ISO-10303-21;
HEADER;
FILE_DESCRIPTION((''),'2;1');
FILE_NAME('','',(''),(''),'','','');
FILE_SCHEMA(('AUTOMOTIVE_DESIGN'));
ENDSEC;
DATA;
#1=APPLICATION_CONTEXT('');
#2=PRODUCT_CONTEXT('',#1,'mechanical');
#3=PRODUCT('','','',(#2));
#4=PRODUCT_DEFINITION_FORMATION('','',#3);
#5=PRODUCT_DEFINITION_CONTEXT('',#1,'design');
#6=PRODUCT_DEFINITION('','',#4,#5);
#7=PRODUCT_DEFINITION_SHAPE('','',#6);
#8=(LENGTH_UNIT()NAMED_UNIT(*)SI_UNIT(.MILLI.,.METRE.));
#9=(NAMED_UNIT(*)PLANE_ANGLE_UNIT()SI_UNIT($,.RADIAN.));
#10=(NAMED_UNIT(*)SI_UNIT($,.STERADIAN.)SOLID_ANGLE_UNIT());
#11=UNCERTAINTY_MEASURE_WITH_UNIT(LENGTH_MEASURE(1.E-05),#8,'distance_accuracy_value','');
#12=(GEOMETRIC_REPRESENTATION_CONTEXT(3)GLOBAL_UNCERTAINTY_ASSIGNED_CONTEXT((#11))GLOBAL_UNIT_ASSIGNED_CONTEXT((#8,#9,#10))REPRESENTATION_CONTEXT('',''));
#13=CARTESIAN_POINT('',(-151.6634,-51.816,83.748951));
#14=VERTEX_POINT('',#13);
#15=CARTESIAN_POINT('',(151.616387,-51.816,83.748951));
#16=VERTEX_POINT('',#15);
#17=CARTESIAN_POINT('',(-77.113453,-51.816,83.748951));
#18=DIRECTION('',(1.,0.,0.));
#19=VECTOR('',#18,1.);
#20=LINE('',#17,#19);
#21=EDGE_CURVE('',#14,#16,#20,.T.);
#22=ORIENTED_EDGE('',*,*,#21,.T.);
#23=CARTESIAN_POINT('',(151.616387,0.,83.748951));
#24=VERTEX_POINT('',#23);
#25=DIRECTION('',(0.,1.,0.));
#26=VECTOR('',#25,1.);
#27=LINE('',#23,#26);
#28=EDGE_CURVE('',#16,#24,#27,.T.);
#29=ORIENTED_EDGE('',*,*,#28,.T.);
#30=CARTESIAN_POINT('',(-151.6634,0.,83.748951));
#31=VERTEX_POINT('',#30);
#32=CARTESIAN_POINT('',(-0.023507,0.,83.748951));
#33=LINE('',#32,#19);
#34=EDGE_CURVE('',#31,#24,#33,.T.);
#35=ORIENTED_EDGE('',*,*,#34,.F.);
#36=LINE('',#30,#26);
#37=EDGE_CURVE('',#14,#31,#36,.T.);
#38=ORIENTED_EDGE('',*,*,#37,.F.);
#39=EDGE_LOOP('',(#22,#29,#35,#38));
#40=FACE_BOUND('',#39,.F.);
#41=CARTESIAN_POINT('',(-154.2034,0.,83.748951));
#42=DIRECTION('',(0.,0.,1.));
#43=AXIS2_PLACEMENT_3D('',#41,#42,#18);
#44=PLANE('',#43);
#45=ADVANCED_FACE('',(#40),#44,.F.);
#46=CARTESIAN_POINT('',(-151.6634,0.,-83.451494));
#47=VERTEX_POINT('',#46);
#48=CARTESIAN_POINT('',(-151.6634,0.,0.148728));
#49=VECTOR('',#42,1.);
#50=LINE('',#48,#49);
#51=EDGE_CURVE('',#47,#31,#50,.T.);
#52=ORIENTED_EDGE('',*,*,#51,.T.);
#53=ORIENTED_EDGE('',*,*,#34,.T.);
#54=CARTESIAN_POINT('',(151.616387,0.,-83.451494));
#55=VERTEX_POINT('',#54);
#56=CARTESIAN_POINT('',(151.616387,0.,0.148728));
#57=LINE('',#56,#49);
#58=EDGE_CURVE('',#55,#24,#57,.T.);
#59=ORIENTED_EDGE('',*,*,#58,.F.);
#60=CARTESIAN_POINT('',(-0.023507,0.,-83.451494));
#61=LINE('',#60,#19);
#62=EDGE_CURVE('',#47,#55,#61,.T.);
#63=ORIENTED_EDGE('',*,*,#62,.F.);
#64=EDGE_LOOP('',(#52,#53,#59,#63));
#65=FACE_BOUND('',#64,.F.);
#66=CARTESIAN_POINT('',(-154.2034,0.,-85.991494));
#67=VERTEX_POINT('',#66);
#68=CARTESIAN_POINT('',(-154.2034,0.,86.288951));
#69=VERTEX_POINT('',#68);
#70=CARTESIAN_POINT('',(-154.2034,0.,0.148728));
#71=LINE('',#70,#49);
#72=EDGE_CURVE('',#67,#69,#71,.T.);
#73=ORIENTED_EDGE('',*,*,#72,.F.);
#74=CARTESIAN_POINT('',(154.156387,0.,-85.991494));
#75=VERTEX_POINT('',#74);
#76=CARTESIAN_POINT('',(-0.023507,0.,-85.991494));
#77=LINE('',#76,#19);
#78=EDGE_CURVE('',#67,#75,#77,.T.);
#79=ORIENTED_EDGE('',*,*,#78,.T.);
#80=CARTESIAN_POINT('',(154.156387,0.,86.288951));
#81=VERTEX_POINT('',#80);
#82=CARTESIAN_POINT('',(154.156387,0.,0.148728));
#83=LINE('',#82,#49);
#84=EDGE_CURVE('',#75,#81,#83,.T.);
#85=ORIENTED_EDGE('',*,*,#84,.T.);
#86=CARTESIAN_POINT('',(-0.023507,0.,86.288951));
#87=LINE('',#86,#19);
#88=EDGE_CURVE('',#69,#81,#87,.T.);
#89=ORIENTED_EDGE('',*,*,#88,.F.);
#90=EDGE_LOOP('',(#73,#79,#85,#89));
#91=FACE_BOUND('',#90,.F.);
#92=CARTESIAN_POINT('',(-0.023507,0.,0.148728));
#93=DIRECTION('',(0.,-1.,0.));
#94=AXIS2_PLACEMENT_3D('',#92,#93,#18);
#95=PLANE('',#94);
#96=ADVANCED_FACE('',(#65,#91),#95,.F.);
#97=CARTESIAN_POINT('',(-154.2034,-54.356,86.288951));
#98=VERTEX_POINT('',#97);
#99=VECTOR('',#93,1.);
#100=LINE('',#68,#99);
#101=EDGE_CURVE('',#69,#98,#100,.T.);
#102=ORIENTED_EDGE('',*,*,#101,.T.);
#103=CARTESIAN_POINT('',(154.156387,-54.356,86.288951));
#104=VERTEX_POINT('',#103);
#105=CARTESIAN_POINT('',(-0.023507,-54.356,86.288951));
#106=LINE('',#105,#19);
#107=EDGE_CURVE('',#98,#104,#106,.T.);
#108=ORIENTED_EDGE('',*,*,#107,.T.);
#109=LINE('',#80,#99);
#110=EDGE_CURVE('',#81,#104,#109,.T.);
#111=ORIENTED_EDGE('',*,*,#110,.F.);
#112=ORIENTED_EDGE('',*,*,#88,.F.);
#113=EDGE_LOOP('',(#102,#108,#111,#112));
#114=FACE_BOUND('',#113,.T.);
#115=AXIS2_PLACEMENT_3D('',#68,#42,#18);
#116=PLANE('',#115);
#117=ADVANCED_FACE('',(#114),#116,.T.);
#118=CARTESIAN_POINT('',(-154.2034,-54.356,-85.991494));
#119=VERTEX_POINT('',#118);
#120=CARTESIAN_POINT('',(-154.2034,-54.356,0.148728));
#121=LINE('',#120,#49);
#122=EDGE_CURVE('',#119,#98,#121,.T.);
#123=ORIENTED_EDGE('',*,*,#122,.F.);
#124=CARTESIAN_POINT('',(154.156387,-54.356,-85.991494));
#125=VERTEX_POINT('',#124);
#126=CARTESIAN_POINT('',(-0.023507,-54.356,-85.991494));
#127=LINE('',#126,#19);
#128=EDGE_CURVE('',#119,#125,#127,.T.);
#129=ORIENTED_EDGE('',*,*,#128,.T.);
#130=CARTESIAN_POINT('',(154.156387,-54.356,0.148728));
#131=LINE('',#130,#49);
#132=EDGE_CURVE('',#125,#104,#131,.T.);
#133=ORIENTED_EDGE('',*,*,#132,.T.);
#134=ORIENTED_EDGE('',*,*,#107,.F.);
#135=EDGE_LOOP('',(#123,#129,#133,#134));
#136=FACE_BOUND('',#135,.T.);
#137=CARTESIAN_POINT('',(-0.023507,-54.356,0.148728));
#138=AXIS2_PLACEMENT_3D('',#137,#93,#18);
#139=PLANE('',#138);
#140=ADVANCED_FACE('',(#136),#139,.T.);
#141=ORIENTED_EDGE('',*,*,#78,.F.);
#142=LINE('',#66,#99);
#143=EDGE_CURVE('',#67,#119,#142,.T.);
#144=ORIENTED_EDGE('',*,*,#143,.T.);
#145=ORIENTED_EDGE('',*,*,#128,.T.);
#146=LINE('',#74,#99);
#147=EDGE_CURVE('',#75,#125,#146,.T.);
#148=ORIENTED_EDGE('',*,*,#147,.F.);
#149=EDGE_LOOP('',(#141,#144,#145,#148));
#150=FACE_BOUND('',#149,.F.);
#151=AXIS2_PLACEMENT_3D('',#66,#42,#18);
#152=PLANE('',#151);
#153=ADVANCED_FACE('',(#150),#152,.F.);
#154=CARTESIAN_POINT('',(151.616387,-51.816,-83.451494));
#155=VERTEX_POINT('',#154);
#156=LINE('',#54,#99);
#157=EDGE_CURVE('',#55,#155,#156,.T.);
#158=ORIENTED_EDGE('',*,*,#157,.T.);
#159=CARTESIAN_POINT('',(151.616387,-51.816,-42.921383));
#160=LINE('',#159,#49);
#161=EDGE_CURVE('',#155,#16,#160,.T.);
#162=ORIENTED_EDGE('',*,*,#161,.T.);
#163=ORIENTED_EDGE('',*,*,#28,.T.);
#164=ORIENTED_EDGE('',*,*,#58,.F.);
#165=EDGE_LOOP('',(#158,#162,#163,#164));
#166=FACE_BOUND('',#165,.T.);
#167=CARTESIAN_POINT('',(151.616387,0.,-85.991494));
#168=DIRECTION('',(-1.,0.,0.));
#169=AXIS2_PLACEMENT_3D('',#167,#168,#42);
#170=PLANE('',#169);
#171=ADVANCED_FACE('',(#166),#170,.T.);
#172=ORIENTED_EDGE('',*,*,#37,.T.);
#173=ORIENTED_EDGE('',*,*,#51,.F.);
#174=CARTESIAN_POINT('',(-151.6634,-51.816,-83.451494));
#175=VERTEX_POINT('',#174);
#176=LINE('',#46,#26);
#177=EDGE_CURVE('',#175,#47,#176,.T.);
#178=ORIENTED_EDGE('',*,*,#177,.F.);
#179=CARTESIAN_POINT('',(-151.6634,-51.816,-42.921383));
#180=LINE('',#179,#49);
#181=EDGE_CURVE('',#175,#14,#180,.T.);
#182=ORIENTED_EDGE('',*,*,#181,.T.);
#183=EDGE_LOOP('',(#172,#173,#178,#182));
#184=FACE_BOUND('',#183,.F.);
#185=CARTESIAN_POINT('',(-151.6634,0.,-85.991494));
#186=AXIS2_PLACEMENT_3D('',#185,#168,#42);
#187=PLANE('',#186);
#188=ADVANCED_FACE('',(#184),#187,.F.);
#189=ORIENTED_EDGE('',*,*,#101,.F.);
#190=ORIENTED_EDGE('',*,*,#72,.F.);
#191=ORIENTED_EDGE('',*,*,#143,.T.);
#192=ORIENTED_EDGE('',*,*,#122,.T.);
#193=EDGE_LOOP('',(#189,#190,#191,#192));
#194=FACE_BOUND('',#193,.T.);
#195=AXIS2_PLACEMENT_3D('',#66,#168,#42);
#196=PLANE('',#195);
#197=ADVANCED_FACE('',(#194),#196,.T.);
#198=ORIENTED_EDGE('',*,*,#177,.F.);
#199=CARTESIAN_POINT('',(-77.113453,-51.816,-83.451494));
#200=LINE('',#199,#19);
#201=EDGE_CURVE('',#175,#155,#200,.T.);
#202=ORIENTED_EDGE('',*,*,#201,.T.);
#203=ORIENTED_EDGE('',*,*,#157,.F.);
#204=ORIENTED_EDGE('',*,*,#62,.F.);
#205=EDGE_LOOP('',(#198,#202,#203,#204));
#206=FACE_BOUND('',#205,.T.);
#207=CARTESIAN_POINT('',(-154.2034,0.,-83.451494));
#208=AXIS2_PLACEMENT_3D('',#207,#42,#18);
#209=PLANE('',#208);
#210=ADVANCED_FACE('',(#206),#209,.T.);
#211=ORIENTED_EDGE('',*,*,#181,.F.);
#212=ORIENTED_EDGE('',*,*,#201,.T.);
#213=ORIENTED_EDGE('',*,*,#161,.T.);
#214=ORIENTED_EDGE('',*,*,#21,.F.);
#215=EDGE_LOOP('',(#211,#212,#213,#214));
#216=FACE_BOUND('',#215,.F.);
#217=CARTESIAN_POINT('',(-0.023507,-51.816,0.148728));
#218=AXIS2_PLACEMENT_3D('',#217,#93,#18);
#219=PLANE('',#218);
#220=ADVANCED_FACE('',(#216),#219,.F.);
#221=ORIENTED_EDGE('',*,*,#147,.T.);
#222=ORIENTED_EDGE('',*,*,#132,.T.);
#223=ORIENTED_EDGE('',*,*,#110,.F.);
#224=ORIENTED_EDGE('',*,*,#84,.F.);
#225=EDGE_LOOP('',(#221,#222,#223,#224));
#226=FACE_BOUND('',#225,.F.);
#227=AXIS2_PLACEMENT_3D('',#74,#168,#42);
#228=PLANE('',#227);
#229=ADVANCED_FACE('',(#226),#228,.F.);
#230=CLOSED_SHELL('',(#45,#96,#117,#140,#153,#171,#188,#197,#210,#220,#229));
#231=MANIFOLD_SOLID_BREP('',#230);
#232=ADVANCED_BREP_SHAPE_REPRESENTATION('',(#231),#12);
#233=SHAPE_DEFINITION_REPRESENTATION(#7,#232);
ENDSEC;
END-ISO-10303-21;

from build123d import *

# Parameters (mm, degrees)
F0_W     = 308.3597868681
F0_H     = 172.2804456949
F1_DEPTH = 54.356
F2_T     = -2.54


# Not quite as in the source:
# - the program builds the solid bodies; features that only make, move or delete a surface that nothing else refers to are left out


with BuildPart() as f1:
    # F0 (on Front) → F1 (new body)
    with BuildSketch(Plane.XZ):
        with Locations((-0.0235065818, 0.1487284899)):
            Rectangle(F0_W, F0_H)
    extrude(amount=F1_DEPTH)

    # F2
    f2_openings = [f1.faces().sort_by_distance(p)[0] for p in [
        (-0.023507, 0, 0.148728),
    ]]
    offset(amount=F2_T, openings=f2_openings)


solid = f1.part
